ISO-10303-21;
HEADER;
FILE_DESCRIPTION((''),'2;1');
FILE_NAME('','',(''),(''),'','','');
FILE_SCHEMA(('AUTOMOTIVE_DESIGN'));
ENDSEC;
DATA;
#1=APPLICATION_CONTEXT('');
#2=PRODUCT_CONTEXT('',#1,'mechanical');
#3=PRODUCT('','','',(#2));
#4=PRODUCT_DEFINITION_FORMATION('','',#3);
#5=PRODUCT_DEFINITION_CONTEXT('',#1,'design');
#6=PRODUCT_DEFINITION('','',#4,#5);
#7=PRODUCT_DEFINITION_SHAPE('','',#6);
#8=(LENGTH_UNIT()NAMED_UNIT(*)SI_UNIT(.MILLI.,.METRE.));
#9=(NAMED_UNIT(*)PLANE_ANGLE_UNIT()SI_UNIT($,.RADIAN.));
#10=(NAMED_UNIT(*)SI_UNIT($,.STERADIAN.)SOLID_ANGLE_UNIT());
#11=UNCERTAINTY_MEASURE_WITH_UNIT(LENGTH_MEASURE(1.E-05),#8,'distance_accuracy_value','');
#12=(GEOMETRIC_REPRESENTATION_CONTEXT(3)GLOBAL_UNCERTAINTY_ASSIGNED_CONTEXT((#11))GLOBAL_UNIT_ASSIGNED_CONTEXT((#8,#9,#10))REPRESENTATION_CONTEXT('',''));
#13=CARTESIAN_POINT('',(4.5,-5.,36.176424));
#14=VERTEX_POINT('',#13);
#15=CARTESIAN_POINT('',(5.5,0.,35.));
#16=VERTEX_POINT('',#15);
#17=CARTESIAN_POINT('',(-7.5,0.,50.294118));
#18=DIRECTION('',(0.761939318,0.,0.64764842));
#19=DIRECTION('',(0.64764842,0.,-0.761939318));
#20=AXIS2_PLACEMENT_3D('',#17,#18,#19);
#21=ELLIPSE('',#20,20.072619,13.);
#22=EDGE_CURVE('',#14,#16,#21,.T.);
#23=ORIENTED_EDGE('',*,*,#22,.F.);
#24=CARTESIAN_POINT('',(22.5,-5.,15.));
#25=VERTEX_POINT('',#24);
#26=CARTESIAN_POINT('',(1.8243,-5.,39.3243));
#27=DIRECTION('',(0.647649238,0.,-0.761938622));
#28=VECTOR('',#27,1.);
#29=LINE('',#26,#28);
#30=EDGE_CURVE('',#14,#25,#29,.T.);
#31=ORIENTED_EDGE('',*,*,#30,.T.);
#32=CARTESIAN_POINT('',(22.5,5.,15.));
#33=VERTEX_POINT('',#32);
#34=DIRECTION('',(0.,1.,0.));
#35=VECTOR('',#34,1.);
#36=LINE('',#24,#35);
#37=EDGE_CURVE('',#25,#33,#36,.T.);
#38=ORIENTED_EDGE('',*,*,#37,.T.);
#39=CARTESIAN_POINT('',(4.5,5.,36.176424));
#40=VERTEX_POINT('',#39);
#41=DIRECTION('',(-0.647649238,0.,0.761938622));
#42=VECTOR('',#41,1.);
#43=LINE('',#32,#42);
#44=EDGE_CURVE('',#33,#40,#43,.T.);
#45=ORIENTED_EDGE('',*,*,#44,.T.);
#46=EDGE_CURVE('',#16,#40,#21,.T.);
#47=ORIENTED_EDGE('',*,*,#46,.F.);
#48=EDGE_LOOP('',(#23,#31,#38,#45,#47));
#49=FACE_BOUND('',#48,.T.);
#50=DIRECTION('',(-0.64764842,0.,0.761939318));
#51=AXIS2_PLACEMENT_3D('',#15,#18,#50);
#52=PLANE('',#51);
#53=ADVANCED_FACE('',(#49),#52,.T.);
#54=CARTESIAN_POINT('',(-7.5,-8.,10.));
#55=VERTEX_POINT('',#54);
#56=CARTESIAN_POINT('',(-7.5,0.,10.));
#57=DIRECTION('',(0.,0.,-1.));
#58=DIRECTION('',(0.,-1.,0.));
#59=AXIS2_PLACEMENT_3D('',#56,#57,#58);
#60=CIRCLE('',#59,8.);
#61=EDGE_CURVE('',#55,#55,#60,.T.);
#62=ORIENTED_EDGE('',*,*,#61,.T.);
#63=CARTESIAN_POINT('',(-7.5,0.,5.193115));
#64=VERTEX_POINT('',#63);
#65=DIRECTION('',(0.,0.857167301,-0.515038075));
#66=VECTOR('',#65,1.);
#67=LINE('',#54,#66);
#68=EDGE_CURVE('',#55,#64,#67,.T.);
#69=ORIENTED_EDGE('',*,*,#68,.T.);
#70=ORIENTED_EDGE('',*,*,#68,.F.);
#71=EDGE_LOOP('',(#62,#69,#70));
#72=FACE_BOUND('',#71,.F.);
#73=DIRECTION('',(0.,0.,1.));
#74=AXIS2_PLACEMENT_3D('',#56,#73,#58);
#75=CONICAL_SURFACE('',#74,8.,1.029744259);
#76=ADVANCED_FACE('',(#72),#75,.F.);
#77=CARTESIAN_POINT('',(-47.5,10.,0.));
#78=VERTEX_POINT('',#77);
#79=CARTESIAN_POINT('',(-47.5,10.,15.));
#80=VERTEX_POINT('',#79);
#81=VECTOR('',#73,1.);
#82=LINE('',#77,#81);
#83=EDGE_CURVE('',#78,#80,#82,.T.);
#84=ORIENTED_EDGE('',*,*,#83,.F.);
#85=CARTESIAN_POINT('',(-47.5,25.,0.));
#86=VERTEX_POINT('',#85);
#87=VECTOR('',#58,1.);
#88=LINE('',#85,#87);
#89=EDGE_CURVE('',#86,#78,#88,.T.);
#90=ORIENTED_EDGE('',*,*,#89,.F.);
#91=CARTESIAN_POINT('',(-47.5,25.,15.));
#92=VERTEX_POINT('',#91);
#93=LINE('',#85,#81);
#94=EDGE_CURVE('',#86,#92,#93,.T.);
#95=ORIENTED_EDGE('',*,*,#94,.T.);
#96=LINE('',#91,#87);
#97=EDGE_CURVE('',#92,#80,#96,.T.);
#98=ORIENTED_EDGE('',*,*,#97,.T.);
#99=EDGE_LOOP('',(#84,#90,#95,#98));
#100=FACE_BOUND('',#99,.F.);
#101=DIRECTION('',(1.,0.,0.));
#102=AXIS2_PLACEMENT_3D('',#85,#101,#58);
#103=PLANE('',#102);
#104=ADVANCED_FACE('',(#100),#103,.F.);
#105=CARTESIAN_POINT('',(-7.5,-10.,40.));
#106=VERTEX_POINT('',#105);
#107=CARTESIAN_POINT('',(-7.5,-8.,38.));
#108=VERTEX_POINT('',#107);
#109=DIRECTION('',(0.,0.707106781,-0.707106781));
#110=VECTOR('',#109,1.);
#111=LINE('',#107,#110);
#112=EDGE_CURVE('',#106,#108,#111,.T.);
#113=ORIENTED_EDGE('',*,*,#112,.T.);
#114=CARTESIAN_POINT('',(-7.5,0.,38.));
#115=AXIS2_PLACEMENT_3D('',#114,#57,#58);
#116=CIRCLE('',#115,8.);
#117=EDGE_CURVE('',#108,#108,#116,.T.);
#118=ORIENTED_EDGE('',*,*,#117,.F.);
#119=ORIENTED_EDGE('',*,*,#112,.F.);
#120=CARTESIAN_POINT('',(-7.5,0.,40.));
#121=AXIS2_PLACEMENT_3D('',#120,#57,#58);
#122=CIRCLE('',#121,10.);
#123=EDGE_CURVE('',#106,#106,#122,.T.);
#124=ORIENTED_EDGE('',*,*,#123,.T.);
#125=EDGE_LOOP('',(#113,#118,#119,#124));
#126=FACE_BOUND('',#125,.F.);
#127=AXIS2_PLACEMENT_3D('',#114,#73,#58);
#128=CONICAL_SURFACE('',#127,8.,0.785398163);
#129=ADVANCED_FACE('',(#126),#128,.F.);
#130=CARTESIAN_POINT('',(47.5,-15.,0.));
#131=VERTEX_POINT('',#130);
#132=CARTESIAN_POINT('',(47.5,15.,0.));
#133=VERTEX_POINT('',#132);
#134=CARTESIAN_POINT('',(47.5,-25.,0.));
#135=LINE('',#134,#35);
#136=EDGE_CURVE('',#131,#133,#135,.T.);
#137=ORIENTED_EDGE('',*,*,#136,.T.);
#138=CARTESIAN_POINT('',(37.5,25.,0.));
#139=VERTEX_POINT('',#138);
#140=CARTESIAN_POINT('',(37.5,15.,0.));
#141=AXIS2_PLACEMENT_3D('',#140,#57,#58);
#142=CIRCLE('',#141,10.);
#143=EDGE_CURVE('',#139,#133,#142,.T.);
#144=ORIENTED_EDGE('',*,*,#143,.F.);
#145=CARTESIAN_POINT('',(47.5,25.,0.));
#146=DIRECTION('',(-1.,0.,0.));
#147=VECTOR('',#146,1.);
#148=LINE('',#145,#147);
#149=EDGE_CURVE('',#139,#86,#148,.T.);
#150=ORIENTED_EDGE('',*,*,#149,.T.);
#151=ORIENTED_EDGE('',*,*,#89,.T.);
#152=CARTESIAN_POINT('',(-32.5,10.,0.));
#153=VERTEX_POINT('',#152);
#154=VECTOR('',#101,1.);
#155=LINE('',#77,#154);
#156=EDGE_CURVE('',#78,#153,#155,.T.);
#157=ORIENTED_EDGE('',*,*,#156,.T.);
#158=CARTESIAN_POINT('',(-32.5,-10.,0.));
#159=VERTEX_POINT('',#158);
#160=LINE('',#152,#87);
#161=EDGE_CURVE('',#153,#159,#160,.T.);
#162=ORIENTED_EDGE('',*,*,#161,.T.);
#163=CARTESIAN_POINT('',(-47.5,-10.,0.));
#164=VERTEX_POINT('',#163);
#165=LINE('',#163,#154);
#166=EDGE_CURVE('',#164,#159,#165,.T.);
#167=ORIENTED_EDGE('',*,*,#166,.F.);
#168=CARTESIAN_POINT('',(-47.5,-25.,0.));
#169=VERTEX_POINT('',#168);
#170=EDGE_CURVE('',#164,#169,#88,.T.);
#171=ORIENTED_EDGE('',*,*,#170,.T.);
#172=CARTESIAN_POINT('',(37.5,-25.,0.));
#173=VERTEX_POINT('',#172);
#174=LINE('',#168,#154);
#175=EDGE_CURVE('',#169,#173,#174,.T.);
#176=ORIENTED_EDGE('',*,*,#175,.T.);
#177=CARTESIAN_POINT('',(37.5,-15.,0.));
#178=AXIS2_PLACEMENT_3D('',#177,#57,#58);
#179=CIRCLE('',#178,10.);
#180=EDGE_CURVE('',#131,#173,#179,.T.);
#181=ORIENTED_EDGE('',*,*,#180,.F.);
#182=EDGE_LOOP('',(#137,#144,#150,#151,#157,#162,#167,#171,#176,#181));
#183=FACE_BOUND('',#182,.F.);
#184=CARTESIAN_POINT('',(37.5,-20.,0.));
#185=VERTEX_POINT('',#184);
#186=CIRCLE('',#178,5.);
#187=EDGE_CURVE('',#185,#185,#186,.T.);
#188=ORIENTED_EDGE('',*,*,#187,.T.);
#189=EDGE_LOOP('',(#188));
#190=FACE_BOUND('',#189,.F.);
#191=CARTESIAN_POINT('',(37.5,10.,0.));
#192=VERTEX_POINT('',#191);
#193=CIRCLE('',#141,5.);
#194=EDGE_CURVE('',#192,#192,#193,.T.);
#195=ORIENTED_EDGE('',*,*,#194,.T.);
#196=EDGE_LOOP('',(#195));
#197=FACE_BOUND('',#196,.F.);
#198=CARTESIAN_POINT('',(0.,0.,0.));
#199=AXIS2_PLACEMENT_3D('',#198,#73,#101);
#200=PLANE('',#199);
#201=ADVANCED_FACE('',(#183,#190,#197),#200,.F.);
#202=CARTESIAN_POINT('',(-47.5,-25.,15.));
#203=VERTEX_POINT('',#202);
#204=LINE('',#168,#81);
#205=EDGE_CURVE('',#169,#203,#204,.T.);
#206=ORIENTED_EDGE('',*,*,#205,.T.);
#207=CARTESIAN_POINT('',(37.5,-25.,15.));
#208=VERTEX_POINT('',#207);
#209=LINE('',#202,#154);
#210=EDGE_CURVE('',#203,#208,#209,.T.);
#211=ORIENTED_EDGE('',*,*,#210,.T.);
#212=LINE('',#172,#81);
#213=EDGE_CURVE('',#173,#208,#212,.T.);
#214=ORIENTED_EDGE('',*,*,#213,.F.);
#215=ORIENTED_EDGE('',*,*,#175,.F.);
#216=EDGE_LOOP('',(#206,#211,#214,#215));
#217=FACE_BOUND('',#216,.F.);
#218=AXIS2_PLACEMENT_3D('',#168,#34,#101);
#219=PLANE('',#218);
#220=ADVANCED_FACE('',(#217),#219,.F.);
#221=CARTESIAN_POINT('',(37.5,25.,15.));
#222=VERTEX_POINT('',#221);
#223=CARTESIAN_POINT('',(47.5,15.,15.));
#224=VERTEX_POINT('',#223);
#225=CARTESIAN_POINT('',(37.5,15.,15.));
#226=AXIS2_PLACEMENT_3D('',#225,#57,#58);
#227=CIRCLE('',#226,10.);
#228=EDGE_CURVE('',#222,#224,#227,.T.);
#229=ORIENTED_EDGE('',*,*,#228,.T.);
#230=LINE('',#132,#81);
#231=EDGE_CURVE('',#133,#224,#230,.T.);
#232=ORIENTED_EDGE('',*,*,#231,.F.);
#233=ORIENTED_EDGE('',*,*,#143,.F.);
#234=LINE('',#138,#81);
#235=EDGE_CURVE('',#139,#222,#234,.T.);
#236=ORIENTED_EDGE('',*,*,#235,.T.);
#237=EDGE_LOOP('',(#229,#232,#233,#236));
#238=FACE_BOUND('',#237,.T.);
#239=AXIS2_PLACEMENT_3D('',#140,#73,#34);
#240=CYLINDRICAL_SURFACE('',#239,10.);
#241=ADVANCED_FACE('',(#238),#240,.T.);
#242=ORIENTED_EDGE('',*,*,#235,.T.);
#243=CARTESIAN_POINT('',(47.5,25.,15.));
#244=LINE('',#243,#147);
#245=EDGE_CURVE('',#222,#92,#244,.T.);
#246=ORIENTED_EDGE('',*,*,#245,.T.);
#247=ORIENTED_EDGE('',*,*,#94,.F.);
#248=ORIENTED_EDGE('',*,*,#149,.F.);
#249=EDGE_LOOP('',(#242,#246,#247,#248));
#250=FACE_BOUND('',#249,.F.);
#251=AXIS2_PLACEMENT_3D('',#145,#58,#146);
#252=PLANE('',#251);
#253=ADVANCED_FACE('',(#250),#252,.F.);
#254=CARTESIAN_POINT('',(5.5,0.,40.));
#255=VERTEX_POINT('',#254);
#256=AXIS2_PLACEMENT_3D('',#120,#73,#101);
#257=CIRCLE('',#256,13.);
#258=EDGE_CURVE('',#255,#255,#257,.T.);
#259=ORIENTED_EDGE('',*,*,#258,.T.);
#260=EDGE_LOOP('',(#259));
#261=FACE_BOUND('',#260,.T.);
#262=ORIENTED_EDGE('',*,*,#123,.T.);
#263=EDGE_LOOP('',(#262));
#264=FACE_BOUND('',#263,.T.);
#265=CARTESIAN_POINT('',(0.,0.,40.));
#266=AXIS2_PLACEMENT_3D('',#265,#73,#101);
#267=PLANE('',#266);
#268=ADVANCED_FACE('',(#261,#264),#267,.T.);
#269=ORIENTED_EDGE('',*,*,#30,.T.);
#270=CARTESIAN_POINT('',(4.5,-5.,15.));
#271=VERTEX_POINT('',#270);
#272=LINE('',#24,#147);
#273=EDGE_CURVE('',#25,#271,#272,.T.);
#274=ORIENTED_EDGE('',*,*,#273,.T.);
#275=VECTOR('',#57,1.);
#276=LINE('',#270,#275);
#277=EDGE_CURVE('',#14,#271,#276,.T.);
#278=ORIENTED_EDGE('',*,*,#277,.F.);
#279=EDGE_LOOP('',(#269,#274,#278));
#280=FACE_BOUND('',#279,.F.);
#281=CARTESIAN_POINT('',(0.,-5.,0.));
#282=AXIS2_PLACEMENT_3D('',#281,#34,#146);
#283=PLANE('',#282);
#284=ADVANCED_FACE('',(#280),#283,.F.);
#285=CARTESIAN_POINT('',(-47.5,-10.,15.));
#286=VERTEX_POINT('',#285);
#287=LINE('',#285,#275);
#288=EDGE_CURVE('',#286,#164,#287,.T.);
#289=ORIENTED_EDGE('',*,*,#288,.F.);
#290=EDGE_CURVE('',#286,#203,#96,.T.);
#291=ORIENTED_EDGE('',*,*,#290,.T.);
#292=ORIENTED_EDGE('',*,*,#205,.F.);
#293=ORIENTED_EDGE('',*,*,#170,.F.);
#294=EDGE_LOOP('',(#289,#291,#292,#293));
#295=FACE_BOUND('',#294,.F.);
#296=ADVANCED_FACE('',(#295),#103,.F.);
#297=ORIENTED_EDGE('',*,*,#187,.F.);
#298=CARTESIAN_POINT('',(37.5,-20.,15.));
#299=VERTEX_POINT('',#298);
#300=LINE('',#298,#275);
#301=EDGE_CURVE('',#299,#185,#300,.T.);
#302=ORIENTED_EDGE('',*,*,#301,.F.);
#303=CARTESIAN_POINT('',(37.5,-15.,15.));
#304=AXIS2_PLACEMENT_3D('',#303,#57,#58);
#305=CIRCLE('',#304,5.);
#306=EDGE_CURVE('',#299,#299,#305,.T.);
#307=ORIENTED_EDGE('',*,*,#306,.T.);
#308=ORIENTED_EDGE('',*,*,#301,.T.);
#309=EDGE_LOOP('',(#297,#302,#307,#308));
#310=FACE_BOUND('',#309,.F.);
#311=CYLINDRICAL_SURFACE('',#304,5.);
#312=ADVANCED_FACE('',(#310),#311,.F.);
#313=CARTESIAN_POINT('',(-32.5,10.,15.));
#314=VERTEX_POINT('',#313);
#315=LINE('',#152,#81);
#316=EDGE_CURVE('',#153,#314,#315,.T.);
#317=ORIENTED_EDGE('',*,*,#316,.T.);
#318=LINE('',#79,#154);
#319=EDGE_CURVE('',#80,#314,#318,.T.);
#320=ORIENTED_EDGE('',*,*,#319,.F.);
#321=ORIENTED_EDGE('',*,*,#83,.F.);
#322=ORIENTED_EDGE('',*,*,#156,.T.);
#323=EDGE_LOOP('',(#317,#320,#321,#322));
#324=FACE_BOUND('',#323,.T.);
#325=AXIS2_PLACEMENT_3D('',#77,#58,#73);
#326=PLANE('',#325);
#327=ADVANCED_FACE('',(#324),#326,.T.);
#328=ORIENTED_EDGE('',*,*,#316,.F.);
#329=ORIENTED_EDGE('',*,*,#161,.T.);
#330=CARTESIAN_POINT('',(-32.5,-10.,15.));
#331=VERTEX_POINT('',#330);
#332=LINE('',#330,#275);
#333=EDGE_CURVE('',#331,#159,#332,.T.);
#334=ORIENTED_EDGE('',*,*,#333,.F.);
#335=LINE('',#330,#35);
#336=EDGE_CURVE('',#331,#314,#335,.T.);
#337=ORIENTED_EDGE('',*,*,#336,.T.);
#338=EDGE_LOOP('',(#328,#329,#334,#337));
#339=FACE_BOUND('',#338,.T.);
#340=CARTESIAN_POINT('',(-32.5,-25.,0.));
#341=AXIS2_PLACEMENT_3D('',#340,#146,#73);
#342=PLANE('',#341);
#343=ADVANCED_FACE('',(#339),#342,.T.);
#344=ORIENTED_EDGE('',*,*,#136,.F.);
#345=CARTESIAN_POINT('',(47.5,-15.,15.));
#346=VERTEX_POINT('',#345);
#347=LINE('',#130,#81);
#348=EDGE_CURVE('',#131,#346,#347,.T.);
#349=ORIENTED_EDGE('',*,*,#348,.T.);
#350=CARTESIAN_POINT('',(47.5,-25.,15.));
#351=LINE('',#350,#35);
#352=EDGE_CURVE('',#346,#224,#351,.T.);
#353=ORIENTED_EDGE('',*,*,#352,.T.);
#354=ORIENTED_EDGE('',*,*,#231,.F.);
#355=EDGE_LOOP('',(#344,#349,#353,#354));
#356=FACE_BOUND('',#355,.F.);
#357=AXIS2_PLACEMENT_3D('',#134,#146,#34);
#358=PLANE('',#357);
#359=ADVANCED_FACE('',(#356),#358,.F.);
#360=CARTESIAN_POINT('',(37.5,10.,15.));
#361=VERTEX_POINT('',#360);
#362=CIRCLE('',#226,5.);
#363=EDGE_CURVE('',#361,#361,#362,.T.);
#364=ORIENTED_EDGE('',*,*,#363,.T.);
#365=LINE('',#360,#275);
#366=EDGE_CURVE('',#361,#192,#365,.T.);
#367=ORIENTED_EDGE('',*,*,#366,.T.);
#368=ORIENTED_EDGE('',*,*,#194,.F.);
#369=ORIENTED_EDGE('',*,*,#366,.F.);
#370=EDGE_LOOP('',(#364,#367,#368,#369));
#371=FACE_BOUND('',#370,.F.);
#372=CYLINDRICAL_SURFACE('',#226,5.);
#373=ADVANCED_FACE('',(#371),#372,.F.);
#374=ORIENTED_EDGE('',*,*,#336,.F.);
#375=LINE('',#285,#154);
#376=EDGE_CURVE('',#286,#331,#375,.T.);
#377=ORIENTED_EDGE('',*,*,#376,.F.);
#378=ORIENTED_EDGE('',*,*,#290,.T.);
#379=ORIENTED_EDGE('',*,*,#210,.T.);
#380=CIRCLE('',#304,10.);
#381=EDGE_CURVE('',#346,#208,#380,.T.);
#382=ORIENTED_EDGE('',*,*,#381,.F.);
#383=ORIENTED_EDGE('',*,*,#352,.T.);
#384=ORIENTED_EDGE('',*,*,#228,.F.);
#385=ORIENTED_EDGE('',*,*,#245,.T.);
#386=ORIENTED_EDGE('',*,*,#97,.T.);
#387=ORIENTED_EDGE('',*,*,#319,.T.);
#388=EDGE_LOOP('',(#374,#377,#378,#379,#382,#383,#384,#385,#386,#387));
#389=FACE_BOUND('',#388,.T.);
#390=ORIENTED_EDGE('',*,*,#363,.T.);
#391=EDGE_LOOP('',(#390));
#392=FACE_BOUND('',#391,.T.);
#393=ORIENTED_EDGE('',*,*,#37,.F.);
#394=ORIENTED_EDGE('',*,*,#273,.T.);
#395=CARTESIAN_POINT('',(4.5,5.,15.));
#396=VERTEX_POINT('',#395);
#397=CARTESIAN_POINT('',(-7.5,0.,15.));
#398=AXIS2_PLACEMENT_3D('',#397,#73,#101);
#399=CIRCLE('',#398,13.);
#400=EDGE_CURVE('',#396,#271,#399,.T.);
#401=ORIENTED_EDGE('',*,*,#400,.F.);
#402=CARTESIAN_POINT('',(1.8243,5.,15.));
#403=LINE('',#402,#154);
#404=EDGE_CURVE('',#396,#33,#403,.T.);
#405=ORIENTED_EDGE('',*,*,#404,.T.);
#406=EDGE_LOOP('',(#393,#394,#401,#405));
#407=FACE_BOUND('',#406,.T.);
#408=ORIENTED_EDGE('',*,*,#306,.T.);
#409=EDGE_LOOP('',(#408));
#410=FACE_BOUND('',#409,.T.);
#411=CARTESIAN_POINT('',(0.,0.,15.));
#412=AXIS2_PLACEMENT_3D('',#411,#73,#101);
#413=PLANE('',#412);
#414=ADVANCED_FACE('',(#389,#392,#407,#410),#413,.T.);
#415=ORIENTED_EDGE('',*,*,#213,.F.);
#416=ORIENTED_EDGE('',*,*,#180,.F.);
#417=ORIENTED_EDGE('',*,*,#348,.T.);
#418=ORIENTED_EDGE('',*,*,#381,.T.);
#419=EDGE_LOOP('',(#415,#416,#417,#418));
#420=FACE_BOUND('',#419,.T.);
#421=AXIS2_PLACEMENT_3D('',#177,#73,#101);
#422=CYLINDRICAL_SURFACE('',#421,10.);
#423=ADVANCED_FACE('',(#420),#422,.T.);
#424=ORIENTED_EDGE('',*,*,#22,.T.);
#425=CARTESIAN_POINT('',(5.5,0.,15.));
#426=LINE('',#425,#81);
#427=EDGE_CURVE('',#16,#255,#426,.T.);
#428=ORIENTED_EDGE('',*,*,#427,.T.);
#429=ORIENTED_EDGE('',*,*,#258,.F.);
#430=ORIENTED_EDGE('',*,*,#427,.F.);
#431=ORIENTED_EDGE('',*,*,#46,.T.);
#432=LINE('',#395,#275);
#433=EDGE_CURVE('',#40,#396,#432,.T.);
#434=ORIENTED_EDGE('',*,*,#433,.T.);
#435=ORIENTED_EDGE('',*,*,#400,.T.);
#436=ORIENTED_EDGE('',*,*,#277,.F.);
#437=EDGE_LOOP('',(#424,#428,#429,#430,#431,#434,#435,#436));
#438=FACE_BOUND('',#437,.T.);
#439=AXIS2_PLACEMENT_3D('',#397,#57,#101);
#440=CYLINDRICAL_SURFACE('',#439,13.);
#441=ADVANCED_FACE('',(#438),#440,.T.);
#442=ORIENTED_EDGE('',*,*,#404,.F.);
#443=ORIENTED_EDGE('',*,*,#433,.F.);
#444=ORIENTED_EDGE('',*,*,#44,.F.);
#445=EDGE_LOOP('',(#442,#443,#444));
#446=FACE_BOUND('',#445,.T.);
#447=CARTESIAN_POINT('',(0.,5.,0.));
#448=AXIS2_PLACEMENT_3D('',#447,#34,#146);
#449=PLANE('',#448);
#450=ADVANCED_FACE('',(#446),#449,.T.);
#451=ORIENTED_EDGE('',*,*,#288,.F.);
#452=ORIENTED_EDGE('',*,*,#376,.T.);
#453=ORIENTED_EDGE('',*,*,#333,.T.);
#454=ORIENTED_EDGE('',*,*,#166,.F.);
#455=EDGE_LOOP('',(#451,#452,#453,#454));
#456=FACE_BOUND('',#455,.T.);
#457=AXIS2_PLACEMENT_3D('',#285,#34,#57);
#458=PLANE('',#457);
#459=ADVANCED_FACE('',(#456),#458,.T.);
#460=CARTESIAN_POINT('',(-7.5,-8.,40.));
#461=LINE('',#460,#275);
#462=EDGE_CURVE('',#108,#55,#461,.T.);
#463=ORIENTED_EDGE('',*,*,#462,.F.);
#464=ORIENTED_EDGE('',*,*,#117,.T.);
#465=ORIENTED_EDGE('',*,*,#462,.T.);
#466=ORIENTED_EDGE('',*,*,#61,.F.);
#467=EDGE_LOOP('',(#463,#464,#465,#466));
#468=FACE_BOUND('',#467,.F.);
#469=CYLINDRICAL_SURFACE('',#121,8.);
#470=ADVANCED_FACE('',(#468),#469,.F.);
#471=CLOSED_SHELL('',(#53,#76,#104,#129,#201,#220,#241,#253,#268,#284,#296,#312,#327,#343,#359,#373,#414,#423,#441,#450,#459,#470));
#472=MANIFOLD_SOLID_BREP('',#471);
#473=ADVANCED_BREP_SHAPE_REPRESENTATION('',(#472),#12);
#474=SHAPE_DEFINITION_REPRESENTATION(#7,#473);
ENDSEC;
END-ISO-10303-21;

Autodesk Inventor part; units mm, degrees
ref_plane "YZ Plane" through (0, 0, 0) normal (1, 0, 0) x (0, 1, 0)
ref_plane "XZ Plane" through (0, 0, 0) normal (0, 1, 0) x (-1, 0, 0)
ref_plane "XY Plane" through (0, 0, 0) normal (0, 0, 1) x (1, 0, 0)
sketch "Эскиз1" plane through (0, 0, 0) normal (0, 0, 1) x (1, 0, 0)
  line L0 (-47.5, -25) -> (47.5, -25)
  line L1 (47.5, -25) -> (47.5, 25)
  line L2 (47.5, 25) -> (-47.5, 25)
  line L3 (-47.5, 25) -> (-47.5, -25)
  line L4 (-47.5, -25) -> (47.5, 25) construction
  line L5 (47.5, -25) -> (-47.5, 25) construction
  point P0 (0, 0)
  dimension "d0" = 95
  dimension "d1" = 50
extrude "Выдавливание1" add sketch "Эскиз1" along normal blind 15
sketch "Эскиз2" plane through (-47.5, -25, 0) normal (-1, 0, 0) x (0, 0, 1)
  point P0 (0, 25)
sketch "Эскиз3" plane through (-47.5, -25, 0) normal (-1, 0, 0) x (0, 0, 1)
  line L0 (15, 0) -> (15, 50) projected
  line L1 (0, 35) -> (15, 35)
  line L2 (15, 35) -> (15, 15)
  line L3 (15, 15) -> (0, 15)
  line L4 (0, 15) -> (0, 35)
  line L5 (0, 25) -> (15, 25)
  dimension "d4" = 20
extrude "Выдавливание2" cut sketch "Эскиз3" against normal blind 15
fillet "Сопряжение1" radius 10 1 edges at (47.5, 25, 7.5)
fillet "Сопряжение2" radius 10 1 edges at (47.5, -25, 7.5)
sketch "Эскиз4" plane through (0, 0, 15) normal (0, 0, 1) x (1, 0, 0)
  line L0 (0, 0) -> (47.5, 0)
  line L1 (47.5, -15) -> (47.5, 15) projected
  line L2 (-47.5, 25) -> (-47.5, 10) projected
  point P0 (37.5, 15)
  point P1 (37.5, -15)
  dimension "d9" = 30
  dimension "d10" = 85
hole "Отверстие1" at (37.5, 15, 15) at (37.5, -15, 15) direction (0, 0, -1) diameter 10 end through all
sketch "Эскиз5" plane through (0, 0, 15) normal (0, 0, 1) x (1, 0, 0)
  circle A0 centre (-7.5, 0) radius 13
  line L0 (-47.5, 25) -> (-47.5, 10) projected
  point P0 (0, 0)
  dimension "d18" = 26
  dimension "d19" = 40
extrude "Выдавливание3" add sketch "Эскиз5" along normal blind 25
sketch "Эскиз6" plane through (-7.5, 0, 40) normal (0, 0, 1) x (1, 0, 0)
  point P0 (7.5, 0)
  point P1 (0, 0)
hole "Отверстие2" at (-7.5, 0, 40) direction (0, 0, -1) diameter 16 depth 30 tip angle 118 clearance for "болты с шестигранной головкой / гайка ГОСТ 12876-67" size "M16" standard "ГОСТ"
chamfer "Фаска1" distance 2 angle 45 1 edges at (-7.5, 8, 40)
sketch "Эскиз7" plane through (0, 0, 15) normal (0, 0, 1) x (1, 0, 0)
  point P0 (0, 0)
sketch "Эскиз8" plane through (0, 0, 0) normal (0, 1, 0) x (-1, 0, 0)
  line L0 (20.5, 40) -> (-5.5, 40) projected
  line L1 (0, 40) -> (-11.4909, 40)
  line L2 (-11.4909, 40) -> (-5.5, 35)
  line L3 (-5.5, 15) -> (-5.5, 40) projected
  line L4 (-5.5, 35) -> (-22.5, 15)
  line L5 (47.5, 0) -> (47.5, 15) projected
  line L6 (-22.5, 15) -> (47.5, 15)
  line L7 (-5.5, 35) -> (-1.25, 40)
  line L8 (17.5, 40) -> (-2.5, 40) projected
  line L9 (-2.5, 40) -> (-0.5, 38) projected
  line L10 (-1.8243, 39.3243) -> (-1.8243, 15)
  line L11 (-37.5, 15) -> (47.5, 15) projected
  point P0 (0, 0)
  dimension "d32" = 70
  dimension "d33" = 5
extrude "Выдавливание4" add sketch "Эскиз8" along normal mid plane 10 contours L10 L6 L3 L7 | L3 L6 L4
properties part number "Основание"
